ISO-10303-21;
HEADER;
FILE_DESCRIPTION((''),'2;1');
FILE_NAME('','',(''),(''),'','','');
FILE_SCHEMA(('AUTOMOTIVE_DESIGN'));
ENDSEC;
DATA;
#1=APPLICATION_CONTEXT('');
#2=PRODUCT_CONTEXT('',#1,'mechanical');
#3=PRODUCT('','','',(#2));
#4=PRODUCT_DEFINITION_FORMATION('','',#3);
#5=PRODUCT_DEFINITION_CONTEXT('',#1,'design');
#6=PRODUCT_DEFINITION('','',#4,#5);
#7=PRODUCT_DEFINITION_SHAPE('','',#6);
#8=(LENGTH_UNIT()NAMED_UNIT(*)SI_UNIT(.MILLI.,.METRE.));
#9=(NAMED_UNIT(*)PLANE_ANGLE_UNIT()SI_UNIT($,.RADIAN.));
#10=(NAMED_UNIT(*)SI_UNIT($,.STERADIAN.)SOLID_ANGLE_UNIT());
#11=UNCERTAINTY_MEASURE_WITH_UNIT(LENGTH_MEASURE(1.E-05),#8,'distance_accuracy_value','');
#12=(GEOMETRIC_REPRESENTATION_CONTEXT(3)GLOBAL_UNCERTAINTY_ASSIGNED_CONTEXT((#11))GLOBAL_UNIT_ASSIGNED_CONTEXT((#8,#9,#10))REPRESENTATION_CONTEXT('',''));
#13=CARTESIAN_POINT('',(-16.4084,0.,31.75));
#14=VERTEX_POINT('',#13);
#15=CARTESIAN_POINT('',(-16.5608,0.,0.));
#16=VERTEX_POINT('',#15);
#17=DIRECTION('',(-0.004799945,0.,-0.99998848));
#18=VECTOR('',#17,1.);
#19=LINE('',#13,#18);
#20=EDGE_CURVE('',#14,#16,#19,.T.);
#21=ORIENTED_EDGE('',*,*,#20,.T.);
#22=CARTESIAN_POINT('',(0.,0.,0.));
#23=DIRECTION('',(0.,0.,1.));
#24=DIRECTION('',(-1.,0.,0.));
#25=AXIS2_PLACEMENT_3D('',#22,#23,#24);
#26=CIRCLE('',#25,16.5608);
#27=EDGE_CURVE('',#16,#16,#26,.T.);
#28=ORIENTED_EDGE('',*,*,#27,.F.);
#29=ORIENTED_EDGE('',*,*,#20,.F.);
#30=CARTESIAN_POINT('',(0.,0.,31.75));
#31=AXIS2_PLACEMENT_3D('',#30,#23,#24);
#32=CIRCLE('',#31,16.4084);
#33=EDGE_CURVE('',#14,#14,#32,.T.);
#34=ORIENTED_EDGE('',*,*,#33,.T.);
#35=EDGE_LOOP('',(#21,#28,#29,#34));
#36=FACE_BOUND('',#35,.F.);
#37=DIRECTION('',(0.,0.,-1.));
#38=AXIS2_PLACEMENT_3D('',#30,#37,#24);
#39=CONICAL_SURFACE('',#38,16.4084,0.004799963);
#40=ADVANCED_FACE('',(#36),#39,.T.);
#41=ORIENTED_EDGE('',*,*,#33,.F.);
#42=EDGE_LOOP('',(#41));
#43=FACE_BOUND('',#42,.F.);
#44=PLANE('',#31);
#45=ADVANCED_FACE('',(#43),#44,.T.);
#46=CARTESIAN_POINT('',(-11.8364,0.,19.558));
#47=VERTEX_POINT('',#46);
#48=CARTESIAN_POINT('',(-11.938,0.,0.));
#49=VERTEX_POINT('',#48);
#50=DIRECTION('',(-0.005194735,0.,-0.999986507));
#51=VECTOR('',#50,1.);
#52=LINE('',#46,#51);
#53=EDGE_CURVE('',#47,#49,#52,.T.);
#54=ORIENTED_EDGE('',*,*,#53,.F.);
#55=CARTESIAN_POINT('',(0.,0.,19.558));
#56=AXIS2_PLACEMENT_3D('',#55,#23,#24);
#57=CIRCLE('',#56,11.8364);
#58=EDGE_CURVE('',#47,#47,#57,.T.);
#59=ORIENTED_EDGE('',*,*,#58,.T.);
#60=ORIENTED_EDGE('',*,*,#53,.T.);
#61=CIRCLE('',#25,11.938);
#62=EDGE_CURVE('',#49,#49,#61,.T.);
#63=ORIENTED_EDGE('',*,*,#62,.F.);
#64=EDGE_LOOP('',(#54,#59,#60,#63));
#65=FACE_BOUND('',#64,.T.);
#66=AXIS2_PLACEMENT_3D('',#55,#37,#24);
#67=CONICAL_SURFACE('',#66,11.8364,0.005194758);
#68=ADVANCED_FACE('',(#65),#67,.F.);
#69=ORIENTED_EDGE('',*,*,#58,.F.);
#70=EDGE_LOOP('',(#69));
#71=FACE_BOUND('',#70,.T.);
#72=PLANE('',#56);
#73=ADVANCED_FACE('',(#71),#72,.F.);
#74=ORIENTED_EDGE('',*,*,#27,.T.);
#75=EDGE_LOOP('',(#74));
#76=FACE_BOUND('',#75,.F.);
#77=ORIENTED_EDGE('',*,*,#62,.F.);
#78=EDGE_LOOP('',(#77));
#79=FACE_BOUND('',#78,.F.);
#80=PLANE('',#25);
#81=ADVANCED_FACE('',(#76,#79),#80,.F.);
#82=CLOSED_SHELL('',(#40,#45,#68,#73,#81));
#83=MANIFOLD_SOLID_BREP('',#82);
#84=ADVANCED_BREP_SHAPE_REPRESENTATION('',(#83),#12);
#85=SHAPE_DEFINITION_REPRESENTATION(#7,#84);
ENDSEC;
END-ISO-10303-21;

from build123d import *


with BuildPart() as f1:
    # F0 (on Front) → F1 (revolve)
    with BuildSketch(Plane.XZ):
        Polygon((-16.5608, 0), (0, 0), (0, 31.75), (-16.4084, 31.75), align=None)
    revolve(axis=Axis((0, 0, 15.875), (0, 0, 1)))

    # F2 (on Front) → F3 (revolve, cut)
    with BuildSketch(Plane.XZ):
        Polygon((-11.938, 0), (0, 0), (0, 19.558), (-11.8364, 19.558), align=None)
    revolve(axis=Axis((0, 0, 9.779), (0, 0, 1)), mode=Mode.SUBTRACT)


solid = f1.part
